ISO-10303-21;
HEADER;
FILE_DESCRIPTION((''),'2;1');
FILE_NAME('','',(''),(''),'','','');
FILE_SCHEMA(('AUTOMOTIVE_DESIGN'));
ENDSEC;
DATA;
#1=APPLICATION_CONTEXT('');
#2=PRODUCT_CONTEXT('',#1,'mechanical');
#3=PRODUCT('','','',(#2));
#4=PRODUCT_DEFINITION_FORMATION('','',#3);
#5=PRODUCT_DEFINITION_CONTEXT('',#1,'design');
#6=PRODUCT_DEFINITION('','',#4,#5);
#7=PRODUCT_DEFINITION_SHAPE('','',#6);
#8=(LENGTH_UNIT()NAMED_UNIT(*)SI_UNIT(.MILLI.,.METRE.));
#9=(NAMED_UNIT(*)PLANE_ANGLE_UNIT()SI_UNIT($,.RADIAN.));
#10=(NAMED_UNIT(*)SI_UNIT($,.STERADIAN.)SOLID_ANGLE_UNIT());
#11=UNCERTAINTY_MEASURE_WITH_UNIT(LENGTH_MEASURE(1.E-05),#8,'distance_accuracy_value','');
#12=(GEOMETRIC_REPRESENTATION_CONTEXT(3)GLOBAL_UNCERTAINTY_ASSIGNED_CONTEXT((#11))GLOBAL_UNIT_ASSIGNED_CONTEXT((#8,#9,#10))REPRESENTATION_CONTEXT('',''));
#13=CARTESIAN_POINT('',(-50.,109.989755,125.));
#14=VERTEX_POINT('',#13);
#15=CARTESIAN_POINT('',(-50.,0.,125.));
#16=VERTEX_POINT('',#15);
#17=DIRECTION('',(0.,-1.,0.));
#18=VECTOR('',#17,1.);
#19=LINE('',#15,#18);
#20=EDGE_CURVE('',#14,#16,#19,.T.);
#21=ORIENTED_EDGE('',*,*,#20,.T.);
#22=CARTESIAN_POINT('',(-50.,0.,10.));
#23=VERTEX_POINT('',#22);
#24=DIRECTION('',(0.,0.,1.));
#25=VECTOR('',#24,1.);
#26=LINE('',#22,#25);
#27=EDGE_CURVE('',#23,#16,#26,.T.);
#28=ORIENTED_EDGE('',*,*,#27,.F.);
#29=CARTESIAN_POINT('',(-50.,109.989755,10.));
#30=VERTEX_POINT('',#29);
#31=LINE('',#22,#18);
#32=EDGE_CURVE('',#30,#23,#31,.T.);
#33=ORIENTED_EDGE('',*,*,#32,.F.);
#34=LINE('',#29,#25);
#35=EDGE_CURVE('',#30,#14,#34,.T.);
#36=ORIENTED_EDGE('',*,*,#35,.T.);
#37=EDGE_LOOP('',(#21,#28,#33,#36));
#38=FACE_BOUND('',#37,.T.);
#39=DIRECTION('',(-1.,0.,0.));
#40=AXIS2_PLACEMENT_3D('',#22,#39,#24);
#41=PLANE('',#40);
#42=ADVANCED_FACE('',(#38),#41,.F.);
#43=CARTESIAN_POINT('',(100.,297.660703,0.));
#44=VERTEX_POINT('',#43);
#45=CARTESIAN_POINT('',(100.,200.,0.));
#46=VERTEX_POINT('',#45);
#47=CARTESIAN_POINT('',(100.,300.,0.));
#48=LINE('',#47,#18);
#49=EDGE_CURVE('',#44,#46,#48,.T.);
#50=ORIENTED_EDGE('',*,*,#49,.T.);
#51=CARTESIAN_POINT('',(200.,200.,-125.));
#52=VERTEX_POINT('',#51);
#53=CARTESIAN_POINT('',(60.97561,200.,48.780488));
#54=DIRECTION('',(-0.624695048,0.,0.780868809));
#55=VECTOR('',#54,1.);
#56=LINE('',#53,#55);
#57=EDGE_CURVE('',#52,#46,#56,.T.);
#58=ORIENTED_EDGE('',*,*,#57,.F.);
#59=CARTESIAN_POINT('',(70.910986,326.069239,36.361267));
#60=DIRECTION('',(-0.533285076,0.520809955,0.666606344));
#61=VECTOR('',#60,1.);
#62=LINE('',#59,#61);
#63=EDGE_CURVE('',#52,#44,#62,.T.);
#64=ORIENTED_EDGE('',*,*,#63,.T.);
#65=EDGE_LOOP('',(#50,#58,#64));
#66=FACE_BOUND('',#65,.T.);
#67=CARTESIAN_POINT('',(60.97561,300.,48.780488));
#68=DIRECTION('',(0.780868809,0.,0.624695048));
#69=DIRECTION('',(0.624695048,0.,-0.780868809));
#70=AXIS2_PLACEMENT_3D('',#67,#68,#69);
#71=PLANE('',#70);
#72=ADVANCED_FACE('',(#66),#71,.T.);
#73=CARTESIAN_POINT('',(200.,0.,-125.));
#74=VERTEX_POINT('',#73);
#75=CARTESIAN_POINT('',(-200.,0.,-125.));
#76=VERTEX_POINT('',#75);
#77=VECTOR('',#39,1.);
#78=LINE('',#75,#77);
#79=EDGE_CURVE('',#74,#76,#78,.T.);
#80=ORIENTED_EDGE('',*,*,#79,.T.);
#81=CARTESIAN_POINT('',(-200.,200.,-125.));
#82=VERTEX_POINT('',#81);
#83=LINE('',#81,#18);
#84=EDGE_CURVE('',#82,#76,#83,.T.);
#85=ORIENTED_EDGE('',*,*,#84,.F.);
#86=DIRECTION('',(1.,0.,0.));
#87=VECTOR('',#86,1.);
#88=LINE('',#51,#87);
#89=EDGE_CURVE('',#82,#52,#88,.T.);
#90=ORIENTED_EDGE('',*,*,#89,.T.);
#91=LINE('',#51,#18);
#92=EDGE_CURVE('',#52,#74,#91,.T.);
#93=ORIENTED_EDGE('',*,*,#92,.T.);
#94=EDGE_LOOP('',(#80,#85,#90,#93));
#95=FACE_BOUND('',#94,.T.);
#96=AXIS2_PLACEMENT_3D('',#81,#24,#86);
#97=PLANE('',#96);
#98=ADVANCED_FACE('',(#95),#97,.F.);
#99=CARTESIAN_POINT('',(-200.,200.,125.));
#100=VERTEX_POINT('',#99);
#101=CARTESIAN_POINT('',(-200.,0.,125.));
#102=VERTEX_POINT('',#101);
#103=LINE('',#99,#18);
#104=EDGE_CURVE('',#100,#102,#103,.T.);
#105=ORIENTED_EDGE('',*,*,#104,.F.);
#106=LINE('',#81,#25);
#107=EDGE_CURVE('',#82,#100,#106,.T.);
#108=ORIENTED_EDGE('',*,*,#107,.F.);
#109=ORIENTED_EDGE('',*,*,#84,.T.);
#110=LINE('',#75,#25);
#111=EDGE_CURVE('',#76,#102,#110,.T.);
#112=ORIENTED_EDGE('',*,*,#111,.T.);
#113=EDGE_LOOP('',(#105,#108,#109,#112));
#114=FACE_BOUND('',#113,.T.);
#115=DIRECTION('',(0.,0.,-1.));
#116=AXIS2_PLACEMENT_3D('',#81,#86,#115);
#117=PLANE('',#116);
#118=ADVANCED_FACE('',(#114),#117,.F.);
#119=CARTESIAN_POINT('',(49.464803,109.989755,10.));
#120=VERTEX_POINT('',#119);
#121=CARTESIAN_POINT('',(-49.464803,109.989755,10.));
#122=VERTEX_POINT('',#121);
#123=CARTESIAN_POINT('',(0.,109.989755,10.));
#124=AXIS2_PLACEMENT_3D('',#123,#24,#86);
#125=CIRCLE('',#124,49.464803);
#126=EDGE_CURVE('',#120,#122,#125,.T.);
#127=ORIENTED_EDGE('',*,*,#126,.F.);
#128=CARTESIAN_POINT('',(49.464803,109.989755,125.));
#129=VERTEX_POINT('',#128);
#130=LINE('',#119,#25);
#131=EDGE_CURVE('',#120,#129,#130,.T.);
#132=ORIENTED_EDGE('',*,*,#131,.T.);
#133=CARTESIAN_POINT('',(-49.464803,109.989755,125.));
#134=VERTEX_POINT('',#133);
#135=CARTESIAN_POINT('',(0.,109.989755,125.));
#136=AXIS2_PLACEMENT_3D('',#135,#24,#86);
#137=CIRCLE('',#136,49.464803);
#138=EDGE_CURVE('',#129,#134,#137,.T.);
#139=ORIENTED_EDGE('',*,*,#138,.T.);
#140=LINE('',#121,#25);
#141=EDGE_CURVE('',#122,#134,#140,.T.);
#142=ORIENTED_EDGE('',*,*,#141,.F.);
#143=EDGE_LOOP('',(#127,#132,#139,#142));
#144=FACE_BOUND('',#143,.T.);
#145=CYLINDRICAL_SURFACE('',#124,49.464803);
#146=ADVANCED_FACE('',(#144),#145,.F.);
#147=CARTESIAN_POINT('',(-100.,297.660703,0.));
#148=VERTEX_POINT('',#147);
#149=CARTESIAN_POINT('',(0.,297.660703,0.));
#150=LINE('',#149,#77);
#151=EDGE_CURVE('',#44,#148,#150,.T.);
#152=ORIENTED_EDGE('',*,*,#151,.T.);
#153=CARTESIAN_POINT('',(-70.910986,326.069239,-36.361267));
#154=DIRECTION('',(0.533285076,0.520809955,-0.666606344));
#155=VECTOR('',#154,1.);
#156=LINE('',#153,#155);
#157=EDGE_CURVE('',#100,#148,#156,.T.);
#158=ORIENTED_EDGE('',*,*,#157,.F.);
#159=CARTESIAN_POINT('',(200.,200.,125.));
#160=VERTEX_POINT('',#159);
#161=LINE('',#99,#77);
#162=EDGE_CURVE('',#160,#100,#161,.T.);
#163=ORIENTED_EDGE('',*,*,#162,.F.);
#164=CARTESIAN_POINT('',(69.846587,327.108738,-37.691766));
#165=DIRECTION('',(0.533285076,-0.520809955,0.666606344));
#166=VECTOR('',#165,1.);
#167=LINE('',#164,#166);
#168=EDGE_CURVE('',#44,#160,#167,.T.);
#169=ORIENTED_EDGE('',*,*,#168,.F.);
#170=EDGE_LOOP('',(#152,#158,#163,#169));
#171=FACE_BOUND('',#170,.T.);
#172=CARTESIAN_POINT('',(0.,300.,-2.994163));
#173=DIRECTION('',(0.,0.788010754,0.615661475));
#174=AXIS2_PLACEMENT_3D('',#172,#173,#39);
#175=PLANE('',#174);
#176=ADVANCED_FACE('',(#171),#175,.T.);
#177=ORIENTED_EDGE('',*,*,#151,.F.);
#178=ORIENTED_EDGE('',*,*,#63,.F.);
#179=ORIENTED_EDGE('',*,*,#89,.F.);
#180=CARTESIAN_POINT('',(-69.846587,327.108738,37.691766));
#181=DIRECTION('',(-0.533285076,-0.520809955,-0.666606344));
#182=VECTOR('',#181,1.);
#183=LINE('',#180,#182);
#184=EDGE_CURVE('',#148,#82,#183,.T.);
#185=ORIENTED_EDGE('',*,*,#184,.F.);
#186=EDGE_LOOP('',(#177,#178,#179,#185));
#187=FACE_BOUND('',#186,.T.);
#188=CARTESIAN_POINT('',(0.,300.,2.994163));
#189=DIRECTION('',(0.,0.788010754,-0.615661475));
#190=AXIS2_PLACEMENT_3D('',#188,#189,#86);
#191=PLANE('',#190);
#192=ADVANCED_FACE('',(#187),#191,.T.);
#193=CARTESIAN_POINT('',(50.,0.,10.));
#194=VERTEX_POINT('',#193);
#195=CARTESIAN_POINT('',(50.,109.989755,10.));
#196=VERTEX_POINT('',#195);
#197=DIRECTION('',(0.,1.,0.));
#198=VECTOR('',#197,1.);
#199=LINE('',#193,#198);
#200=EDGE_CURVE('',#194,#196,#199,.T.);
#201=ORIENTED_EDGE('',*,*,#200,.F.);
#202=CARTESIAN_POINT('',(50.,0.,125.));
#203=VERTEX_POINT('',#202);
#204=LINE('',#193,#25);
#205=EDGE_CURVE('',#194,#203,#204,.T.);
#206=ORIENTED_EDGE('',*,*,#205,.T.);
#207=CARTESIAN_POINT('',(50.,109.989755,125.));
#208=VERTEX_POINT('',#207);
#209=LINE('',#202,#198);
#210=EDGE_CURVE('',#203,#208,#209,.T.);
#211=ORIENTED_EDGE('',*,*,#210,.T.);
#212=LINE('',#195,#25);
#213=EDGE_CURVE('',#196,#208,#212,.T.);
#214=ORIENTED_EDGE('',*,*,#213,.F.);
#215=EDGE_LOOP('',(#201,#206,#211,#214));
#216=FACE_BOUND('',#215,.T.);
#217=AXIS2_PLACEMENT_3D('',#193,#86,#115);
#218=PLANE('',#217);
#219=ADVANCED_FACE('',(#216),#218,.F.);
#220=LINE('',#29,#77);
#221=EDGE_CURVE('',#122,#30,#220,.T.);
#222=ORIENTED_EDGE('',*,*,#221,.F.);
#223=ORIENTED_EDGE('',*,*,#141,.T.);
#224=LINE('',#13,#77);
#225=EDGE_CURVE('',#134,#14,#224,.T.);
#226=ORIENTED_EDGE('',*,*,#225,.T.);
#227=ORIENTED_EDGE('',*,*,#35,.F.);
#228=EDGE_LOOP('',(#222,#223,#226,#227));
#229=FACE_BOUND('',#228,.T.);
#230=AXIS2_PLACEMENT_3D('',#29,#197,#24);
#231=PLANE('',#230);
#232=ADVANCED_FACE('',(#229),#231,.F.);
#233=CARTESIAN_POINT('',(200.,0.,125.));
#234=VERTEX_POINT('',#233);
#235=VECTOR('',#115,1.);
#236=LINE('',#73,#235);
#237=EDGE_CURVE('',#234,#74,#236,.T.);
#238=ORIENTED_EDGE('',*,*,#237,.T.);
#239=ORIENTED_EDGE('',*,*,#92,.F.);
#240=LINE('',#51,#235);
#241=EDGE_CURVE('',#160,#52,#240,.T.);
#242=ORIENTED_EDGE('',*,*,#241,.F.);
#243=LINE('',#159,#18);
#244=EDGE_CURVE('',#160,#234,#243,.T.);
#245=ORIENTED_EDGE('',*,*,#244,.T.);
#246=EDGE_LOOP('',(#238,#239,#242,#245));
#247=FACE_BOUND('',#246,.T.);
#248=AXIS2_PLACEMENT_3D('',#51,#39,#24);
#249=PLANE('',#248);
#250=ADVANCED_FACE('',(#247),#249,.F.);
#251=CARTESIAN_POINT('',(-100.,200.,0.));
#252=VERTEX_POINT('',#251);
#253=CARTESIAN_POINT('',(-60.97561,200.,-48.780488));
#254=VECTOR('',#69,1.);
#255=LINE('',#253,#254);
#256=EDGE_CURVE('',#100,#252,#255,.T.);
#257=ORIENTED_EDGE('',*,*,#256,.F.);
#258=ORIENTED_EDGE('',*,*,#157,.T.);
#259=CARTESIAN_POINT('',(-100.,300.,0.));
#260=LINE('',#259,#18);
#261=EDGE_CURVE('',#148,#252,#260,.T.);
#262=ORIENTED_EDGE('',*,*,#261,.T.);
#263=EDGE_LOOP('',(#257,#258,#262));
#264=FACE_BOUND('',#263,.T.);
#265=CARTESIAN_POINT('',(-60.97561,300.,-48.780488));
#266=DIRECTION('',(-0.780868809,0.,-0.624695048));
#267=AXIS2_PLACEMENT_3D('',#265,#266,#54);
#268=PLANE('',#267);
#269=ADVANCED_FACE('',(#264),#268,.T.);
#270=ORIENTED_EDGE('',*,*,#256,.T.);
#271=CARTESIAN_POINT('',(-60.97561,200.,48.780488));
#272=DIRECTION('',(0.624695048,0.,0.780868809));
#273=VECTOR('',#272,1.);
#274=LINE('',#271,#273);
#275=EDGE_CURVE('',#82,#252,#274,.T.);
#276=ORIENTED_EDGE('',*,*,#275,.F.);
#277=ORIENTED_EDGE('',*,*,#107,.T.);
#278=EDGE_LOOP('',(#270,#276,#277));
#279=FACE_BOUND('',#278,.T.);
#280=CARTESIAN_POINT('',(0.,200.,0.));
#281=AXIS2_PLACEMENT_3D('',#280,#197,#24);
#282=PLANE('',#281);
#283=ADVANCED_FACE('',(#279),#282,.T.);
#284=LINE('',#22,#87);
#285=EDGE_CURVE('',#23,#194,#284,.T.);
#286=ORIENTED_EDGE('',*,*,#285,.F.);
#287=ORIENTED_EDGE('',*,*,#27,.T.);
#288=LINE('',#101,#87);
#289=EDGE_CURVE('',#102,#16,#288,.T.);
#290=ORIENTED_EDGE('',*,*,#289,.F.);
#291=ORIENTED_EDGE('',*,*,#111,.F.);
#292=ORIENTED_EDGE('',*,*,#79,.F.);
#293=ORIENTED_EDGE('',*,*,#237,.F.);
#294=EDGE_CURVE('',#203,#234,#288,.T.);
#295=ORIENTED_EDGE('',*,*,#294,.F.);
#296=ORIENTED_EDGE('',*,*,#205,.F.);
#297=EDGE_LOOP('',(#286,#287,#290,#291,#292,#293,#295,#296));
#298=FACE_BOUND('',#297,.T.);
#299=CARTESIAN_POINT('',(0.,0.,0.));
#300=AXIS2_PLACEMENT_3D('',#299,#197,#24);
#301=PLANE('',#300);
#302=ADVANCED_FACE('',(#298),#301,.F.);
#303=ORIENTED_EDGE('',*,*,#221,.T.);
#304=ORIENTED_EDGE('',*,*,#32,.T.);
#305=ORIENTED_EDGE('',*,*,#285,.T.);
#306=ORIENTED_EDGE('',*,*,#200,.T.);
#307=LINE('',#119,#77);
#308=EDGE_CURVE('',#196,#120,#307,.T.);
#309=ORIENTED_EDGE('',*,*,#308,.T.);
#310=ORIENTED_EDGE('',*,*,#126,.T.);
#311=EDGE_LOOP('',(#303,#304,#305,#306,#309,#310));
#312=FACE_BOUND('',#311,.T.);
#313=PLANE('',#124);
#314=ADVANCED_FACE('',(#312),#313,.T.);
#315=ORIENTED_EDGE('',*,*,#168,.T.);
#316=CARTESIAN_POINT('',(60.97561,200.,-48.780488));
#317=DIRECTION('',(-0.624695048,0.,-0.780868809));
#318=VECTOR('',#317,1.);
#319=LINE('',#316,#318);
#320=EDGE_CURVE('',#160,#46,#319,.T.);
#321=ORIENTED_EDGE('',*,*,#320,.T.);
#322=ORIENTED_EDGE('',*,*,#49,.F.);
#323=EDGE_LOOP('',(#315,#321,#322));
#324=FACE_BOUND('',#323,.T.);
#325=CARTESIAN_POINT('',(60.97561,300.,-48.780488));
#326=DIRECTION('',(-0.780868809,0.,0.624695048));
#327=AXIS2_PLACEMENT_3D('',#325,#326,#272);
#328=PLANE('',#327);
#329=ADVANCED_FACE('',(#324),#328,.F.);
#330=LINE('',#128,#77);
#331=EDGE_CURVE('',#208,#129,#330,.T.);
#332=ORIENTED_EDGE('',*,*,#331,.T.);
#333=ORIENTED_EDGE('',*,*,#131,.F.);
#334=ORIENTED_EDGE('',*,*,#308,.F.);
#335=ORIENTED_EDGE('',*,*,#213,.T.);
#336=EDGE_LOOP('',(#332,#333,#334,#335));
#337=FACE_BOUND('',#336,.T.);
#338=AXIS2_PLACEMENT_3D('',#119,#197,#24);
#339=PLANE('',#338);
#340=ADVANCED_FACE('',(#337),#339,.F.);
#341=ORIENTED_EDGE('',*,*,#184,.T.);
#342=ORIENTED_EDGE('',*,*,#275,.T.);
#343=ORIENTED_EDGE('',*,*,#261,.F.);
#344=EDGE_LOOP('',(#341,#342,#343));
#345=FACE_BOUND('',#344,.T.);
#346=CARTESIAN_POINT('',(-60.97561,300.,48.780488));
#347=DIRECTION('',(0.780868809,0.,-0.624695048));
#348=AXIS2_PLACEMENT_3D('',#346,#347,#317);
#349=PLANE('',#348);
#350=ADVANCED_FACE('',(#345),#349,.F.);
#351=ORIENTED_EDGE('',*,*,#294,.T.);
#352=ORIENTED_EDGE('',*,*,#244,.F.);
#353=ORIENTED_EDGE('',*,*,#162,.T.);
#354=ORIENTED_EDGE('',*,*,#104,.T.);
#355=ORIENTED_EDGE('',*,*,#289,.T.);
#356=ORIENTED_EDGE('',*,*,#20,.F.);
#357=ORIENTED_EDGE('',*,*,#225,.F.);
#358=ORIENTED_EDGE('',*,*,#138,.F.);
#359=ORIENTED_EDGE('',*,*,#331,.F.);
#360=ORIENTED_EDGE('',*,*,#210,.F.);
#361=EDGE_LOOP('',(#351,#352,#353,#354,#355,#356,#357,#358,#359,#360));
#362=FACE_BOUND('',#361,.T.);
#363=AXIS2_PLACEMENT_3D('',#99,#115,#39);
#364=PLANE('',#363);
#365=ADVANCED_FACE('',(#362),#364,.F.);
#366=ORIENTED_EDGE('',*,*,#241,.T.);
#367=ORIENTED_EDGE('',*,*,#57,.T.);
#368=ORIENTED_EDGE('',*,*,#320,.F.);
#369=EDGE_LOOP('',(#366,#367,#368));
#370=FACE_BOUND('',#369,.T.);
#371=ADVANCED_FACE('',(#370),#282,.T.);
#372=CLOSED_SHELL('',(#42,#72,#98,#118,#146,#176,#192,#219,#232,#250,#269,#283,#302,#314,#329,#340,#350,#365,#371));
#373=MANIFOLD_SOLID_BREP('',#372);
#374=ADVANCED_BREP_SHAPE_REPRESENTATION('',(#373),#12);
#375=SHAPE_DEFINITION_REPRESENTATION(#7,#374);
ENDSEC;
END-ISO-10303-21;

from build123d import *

# Parameters (mm, degrees)
CROQUIS1_W              = 400
CROQUIS1_H              = 250
SALIENTE_EXTRUIR1_DEPTH = 200
CORTAR_EXTRUIR1_DEPTH   = 115
SALIENTE_EXTRUIR2_DEPTH = 100
CHAFL_N1_SIZE           = 100
CHAFL_N1_SIZE2          = 127.994163219
CHAFL_N2_SIZE           = 127.994163219
CHAFL_N2_SIZE_2         = 100


with BuildPart() as part:
    # Croquis1 → Saliente-Extruir1 (new body)
    with BuildSketch(Plane(origin=(0, 0, 0), x_dir=(1, 0, 0), z_dir=(0, 1, 0))):
        Rectangle(CROQUIS1_W, CROQUIS1_H)
    extrude(amount=SALIENTE_EXTRUIR1_DEPTH)

    # Croquis2 → Cortar-Extruir1 (cut)
    with BuildSketch(Plane.XY.offset(125)):
        with BuildLine():
            Line((-50, 0), (50, 0))
            Line((50, 0), (50, 109.989754524))
            Line((50, 109.989754524), (49.464803301, 109.989754524))
            ThreePointArc((49.464803301, 109.989754524), (0, 159.454557825), (-49.464803301, 109.989754524))
            Line((-49.464803301, 109.989754524), (-50, 109.989754524))
            Line((-50, 109.989754524), (-50, 0))
        make_face()
    extrude(amount=-CORTAR_EXTRUIR1_DEPTH, mode=Mode.SUBTRACT)

    # Croquis4 → Saliente-Extruir2 (add)
    with BuildSketch(Plane(origin=(0, 200, 0), x_dir=(1, 0, 0), z_dir=(0, 1, 0))):
        Polygon((-200, 125), (-100, 0), (100, 0), (200, 125), align=None)
        Polygon((-100, 0), (100, 0), (200, -125), (-200, -125), align=None)
    extrude(amount=SALIENTE_EXTRUIR2_DEPTH)

    # Chaflán1
    chafl_n1_edges = [part.edges().sort_by_distance(p)[0] for p in [
        (0, 300, 125),
    ]]
    chafl_n1_side = [part.faces().sort_by_distance(p)[0] for p in [
        (0, 160.632106787, 125),
    ]]
    chamfer(chafl_n1_edges, length=CHAFL_N1_SIZE, length2=CHAFL_N1_SIZE2, reference=chafl_n1_side[0])

    # Chaflán2
    # the kernel refuses this chamfer: 127.994163219, 100 mm, written as the material it takes off along each edge
    with BuildSketch(Plane(origin=(530.165536966, 300, -125), x_dir=(0, 0.023867141339117125, 0.9997151392093142), z_dir=(-1, 0, 0))) as chafl_n2_piece_1:
        Polygon((CHAFL_N2_SIZE * 0.999715139212, -CHAFL_N2_SIZE * 0.0238671413392), (-CHAFL_N2_SIZE_2 * 0.0238671413391, -CHAFL_N2_SIZE_2 * 0.999715139209), (0, 0), align=None)
    extrude(amount=1060.331073932, mode=Mode.SUBTRACT)


solid = part.part
